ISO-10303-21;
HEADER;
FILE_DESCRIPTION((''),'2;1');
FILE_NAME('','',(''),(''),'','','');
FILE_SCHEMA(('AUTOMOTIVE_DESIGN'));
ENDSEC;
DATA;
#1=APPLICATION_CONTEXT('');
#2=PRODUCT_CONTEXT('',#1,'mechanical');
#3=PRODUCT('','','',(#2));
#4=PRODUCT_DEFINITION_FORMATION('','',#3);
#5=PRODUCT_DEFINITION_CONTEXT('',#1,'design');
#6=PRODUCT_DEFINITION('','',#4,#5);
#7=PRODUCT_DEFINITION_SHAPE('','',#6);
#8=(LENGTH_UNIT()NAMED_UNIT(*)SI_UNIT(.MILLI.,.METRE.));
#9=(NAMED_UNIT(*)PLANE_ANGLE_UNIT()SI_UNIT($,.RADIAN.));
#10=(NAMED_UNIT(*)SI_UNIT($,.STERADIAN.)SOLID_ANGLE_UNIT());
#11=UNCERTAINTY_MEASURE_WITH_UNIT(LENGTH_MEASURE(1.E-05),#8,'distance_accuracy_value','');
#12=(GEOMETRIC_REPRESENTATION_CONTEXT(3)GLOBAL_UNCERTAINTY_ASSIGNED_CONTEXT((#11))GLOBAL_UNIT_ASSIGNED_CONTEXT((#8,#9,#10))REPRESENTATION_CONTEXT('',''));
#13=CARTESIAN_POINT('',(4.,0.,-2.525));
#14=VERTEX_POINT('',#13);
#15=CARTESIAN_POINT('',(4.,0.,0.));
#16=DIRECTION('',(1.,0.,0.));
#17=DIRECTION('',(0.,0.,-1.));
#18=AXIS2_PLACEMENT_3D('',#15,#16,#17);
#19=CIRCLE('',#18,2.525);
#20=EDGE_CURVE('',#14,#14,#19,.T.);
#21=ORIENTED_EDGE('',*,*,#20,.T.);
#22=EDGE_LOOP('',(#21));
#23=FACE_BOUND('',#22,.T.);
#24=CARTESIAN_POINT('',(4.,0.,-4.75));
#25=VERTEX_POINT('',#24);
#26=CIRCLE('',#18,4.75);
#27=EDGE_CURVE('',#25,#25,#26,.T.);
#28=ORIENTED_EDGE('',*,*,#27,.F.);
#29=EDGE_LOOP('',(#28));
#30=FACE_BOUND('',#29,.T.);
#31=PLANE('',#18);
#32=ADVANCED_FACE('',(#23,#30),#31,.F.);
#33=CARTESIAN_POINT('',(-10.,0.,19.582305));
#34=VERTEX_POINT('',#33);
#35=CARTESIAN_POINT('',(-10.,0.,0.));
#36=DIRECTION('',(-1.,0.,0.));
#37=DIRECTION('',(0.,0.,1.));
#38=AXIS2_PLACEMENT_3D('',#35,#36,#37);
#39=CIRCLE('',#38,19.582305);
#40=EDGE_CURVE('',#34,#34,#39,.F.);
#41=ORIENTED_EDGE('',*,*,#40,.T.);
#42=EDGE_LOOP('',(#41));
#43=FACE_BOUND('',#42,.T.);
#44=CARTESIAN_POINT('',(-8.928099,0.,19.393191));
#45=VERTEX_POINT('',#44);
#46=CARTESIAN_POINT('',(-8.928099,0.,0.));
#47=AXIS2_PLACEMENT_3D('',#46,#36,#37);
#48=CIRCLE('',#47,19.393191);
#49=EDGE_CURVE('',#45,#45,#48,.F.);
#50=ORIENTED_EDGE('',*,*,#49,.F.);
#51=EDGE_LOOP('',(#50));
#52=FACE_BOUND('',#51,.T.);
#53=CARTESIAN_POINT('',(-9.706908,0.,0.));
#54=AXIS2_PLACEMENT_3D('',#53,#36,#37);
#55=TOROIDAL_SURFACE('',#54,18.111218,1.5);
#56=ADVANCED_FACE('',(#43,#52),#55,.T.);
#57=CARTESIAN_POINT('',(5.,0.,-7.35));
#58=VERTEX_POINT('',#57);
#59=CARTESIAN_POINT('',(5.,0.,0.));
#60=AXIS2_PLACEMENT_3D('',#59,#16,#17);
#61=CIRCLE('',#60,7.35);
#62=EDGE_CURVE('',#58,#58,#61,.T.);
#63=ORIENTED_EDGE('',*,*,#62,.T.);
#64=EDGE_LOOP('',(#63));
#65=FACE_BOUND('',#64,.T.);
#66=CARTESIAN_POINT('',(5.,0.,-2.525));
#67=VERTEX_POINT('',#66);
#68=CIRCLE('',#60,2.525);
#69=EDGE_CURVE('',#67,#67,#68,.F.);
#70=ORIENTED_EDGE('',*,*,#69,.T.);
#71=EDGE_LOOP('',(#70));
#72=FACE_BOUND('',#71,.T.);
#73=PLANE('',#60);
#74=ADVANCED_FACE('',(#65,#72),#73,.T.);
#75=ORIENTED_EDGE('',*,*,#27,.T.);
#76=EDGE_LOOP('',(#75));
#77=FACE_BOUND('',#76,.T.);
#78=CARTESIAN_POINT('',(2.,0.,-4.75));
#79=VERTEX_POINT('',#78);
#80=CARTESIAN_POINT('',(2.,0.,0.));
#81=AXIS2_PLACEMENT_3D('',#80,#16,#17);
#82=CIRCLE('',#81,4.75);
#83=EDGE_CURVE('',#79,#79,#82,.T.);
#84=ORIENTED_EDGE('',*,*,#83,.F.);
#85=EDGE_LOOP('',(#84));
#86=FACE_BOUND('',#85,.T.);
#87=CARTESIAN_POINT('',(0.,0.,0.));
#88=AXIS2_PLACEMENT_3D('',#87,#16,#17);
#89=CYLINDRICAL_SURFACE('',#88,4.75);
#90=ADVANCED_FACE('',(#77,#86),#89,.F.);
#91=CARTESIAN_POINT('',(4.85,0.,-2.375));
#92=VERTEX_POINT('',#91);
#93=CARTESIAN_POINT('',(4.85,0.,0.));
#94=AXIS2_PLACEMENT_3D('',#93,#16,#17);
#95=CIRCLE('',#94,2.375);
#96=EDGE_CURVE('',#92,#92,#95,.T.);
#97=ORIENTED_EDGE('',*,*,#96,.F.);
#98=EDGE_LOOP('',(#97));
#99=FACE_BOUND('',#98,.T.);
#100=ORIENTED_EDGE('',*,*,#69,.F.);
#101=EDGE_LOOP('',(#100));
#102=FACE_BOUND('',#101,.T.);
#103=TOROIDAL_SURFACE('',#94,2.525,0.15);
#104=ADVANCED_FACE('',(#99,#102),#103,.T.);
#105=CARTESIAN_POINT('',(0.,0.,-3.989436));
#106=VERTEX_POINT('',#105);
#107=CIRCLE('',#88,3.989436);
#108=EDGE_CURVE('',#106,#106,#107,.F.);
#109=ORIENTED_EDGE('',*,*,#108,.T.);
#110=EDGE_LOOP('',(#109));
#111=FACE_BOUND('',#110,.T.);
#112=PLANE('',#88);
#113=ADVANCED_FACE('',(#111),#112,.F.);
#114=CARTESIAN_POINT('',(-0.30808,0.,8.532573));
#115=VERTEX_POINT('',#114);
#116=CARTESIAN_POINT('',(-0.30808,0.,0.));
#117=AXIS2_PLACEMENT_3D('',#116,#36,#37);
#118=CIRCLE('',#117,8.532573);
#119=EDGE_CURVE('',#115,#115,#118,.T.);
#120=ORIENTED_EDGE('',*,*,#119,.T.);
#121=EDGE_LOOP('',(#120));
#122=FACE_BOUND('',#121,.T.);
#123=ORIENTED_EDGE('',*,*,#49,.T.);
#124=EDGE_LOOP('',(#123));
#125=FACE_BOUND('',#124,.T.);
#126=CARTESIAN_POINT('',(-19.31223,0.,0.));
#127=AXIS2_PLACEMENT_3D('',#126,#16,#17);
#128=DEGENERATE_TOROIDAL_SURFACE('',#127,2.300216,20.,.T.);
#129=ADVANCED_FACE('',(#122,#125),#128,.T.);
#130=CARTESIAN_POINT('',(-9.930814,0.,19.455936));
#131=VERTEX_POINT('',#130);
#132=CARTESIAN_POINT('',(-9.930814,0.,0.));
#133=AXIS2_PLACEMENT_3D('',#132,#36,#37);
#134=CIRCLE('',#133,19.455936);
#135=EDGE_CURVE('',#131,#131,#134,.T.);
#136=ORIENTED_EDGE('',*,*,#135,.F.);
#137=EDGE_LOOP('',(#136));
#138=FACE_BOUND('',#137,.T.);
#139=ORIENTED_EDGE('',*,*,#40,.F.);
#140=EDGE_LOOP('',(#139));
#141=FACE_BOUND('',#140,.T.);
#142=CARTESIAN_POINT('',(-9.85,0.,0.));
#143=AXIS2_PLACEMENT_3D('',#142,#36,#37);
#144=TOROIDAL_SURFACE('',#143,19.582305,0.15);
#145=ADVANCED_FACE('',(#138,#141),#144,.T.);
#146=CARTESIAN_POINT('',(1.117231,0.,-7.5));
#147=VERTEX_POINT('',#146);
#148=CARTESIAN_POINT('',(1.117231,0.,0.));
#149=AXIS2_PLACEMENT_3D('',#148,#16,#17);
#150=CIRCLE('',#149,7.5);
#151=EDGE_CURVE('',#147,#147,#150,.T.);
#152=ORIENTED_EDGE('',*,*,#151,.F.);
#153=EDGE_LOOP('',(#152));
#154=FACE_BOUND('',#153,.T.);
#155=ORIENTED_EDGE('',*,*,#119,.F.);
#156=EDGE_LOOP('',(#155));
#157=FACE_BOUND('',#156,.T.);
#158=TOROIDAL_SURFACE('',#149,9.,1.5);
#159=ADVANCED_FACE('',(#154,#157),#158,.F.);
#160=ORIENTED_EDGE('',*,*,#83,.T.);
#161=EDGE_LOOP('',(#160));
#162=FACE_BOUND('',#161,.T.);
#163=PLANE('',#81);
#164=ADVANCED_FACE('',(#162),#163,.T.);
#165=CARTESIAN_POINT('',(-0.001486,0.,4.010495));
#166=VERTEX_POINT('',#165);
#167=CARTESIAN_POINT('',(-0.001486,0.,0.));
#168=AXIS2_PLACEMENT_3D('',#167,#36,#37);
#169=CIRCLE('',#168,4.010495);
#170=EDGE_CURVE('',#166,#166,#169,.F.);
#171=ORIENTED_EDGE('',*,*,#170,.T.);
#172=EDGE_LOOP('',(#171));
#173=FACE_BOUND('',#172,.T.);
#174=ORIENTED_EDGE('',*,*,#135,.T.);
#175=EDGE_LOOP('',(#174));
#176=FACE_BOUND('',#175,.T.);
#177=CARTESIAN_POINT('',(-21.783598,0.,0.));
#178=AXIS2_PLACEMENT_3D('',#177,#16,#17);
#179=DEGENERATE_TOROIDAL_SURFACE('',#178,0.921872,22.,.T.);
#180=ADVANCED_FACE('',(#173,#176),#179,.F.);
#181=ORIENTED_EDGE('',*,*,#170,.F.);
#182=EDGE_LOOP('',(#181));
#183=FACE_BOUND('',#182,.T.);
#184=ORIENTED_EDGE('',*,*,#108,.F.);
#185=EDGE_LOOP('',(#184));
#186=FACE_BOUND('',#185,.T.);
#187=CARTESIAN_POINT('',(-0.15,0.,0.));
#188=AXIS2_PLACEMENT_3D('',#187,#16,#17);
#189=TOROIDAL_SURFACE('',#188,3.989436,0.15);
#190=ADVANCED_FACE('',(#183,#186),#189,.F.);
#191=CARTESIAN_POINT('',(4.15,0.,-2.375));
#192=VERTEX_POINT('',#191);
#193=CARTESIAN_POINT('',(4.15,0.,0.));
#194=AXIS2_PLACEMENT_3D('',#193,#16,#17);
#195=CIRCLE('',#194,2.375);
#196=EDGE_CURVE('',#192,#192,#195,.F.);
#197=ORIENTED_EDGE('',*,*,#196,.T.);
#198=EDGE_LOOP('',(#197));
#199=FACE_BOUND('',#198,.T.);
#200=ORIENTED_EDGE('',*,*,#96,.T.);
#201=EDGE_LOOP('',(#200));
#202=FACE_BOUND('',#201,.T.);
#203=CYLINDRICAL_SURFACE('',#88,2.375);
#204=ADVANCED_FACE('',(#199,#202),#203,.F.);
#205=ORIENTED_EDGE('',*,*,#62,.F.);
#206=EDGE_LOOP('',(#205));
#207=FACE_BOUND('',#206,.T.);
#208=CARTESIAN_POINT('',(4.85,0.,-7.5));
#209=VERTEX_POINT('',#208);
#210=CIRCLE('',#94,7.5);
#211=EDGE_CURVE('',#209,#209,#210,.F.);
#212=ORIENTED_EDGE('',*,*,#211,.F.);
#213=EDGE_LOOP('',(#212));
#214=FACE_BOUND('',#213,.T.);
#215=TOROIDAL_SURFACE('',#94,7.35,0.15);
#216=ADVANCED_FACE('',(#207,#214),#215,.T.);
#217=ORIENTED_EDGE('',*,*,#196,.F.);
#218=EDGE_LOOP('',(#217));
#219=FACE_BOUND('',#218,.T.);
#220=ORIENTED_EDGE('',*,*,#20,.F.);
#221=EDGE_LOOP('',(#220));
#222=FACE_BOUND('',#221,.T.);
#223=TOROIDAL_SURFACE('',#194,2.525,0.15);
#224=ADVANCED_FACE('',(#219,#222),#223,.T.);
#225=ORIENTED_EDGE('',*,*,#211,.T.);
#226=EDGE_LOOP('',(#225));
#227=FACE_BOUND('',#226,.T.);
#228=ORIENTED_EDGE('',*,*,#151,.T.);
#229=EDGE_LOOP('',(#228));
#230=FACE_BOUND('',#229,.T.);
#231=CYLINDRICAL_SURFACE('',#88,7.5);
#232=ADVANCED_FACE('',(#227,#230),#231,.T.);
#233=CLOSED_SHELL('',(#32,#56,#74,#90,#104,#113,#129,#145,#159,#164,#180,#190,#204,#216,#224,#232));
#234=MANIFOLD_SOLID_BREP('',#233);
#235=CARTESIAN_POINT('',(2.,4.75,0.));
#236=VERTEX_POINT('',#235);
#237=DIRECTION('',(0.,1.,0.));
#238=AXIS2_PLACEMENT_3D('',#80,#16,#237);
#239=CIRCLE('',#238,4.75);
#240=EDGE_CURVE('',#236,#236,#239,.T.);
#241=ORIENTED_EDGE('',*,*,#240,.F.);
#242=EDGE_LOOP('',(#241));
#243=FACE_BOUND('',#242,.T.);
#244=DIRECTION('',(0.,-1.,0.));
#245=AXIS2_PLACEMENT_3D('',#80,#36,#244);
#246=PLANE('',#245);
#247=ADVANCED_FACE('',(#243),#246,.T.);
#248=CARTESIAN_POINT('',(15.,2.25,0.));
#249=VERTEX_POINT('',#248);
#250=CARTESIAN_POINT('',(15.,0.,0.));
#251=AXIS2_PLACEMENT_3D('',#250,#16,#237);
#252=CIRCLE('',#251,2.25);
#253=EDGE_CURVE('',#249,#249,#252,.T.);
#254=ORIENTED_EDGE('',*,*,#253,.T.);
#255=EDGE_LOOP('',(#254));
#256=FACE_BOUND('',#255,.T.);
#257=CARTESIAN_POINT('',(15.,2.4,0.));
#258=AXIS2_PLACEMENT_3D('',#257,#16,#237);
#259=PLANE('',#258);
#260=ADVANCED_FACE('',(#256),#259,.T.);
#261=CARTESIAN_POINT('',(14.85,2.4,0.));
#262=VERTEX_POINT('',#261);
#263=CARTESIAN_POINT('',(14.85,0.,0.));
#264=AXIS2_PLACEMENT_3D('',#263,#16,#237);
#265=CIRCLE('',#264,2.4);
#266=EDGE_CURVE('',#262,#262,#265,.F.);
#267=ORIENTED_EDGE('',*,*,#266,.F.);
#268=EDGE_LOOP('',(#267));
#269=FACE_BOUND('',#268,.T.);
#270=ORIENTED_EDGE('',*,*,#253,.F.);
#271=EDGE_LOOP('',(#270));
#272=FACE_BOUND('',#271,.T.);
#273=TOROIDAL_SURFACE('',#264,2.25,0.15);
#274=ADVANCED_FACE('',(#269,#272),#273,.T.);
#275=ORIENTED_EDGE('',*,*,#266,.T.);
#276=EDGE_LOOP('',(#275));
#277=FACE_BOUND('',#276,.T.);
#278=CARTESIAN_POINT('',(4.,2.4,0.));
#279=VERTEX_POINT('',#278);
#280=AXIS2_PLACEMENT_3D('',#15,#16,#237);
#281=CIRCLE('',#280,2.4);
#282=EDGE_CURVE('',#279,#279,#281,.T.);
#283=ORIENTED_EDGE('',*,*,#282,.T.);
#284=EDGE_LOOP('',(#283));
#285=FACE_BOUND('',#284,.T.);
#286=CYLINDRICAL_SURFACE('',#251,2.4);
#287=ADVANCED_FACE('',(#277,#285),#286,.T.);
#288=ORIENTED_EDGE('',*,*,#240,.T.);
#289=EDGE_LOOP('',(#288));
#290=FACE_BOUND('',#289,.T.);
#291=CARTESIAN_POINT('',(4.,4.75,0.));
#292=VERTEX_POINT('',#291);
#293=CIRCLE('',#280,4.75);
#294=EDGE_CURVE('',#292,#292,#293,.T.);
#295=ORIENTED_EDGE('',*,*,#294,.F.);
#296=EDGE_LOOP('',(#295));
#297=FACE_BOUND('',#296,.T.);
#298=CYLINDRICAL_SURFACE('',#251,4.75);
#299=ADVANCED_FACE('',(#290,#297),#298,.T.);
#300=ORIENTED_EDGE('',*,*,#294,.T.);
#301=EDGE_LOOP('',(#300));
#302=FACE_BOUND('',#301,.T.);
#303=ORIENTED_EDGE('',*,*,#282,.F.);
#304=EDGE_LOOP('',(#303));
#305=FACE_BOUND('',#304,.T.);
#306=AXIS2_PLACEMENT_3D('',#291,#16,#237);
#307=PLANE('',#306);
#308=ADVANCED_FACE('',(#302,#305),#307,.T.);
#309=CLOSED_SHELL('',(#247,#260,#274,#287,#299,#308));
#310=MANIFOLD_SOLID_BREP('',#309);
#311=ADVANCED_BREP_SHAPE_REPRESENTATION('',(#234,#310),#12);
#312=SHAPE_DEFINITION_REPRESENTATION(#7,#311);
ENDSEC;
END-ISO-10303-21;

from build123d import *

# Parameters (mm, degrees)
ZAOKR_GLENIE1_R = 0.15
ZAOKR_GLENIE2_R = 1.5
ZAOKR_GLENIE3_R = 0.15


with BuildPart() as part:
    # Szkic1 → Obrót1 (revolve)
    with BuildSketch(Plane(origin=(0, 0, 0), x_dir=(1, 0, 0), z_dir=(0, 1, 0))):
        with BuildLine():
            Line((0, 4), (0, 0))
            Line((0, 0), (2, 0))
            Line((2, 0), (2, 4.75))
            Line((2, 4.75), (4, 4.75))
            Line((4, 4.75), (4, 2.375))
            Line((4, 2.375), (5, 2.375))
            Line((5, 2.375), (5, 7.5))
            Line((5, 7.5), (0, 7.5))
            ThreePointArc((0, 7.5), (-3.694854211, 14.794116631), (-10, 20))
            Line((-10, 20), (-10, 19.5))
            ThreePointArc((-10, 19.5), (-3.297071482, 12.84866356), (0, 4))
        make_face()
    revolve(axis=Axis((0, 0, 0), (-1, 0, 0)))

    # Zaokrąglenie1
    zaokr_glenie1_edges = [part.edges().sort_by_distance(p)[0] for p in [
        (0, 0, 4),
        (-10, 0, 19.5),
        (5, 0, 7.5),
        (5, 0, 2.375),
        (4, 0, 2.375),
    ]]
    fillet(zaokr_glenie1_edges, radius=ZAOKR_GLENIE1_R)

    # Zaokrąglenie2
    # the kernel refuses this fillet: 1.5 mm, written as the material it adds along each edge
    with BuildSketch(Plane(origin=(0, 0, 0), x_dir=(0, 0, -1), z_dir=(0, 1, 0))) as zaokr_glenie2_piece_1:
        with BuildLine():
            CenterArc((9, -1.117230926), ZAOKR_GLENIE2_R, 108.15675825, 71.84324175)
            Line((7.5, -1.117230926), (7.5, 0))
            ThreePointArc((7.5, 0), (8.018361801, 0.147084824), (8.532573187, 0.308080329))
        make_face()
    revolve(axis=Axis((0, 0, 0), (-1, 0, 0)))
    # the kernel refuses this fillet: 1.5 mm, written as the material it takes off along each edge
    with BuildSketch(Plane(origin=(-10, 0, 0), x_dir=(0, 0, -1), z_dir=(0, 1, 0))) as zaokr_glenie2_2_piece_1:
        with BuildLine():
            CenterArc((18.111217478, -0.293092194), ZAOKR_GLENIE2_R, 328.720951381, 42.546835999)
            ThreePointArc((19.393190597, -1.071902134), (19.704849183, -0.540623634), (20, 0))
            Line((20, 0), (19.58230448, 0))
        make_face()
    revolve(axis=Axis((-10, 0, 0), (-1, 0, 0)), mode=Mode.SUBTRACT)


with BuildPart() as body_2:
    # Szkic2 → Obrót2 (revolve)
    with BuildSketch(Plane.XY, mode=Mode.PRIVATE) as obr_t2_sk:
        Polygon((2, 0), (2, 4.75), (4, 4.75), (4, 2.4), (15, 2.4), (15, 0), align=None)
    revolve(obr_t2_sk.sketch.rotate(Axis((15, 0, 0), (-1, 0, 0)), 270), axis=Axis((15, 0, 0), (-1, 0, 0)))

    # Zaokrąglenie3
    zaokr_glenie3_edges = [body_2.edges().sort_by_distance(p)[0] for p in [
        (15, 0, -2.4),
    ]]
    fillet(zaokr_glenie3_edges, radius=ZAOKR_GLENIE3_R)


solid = Compound([part.part, body_2.part])
